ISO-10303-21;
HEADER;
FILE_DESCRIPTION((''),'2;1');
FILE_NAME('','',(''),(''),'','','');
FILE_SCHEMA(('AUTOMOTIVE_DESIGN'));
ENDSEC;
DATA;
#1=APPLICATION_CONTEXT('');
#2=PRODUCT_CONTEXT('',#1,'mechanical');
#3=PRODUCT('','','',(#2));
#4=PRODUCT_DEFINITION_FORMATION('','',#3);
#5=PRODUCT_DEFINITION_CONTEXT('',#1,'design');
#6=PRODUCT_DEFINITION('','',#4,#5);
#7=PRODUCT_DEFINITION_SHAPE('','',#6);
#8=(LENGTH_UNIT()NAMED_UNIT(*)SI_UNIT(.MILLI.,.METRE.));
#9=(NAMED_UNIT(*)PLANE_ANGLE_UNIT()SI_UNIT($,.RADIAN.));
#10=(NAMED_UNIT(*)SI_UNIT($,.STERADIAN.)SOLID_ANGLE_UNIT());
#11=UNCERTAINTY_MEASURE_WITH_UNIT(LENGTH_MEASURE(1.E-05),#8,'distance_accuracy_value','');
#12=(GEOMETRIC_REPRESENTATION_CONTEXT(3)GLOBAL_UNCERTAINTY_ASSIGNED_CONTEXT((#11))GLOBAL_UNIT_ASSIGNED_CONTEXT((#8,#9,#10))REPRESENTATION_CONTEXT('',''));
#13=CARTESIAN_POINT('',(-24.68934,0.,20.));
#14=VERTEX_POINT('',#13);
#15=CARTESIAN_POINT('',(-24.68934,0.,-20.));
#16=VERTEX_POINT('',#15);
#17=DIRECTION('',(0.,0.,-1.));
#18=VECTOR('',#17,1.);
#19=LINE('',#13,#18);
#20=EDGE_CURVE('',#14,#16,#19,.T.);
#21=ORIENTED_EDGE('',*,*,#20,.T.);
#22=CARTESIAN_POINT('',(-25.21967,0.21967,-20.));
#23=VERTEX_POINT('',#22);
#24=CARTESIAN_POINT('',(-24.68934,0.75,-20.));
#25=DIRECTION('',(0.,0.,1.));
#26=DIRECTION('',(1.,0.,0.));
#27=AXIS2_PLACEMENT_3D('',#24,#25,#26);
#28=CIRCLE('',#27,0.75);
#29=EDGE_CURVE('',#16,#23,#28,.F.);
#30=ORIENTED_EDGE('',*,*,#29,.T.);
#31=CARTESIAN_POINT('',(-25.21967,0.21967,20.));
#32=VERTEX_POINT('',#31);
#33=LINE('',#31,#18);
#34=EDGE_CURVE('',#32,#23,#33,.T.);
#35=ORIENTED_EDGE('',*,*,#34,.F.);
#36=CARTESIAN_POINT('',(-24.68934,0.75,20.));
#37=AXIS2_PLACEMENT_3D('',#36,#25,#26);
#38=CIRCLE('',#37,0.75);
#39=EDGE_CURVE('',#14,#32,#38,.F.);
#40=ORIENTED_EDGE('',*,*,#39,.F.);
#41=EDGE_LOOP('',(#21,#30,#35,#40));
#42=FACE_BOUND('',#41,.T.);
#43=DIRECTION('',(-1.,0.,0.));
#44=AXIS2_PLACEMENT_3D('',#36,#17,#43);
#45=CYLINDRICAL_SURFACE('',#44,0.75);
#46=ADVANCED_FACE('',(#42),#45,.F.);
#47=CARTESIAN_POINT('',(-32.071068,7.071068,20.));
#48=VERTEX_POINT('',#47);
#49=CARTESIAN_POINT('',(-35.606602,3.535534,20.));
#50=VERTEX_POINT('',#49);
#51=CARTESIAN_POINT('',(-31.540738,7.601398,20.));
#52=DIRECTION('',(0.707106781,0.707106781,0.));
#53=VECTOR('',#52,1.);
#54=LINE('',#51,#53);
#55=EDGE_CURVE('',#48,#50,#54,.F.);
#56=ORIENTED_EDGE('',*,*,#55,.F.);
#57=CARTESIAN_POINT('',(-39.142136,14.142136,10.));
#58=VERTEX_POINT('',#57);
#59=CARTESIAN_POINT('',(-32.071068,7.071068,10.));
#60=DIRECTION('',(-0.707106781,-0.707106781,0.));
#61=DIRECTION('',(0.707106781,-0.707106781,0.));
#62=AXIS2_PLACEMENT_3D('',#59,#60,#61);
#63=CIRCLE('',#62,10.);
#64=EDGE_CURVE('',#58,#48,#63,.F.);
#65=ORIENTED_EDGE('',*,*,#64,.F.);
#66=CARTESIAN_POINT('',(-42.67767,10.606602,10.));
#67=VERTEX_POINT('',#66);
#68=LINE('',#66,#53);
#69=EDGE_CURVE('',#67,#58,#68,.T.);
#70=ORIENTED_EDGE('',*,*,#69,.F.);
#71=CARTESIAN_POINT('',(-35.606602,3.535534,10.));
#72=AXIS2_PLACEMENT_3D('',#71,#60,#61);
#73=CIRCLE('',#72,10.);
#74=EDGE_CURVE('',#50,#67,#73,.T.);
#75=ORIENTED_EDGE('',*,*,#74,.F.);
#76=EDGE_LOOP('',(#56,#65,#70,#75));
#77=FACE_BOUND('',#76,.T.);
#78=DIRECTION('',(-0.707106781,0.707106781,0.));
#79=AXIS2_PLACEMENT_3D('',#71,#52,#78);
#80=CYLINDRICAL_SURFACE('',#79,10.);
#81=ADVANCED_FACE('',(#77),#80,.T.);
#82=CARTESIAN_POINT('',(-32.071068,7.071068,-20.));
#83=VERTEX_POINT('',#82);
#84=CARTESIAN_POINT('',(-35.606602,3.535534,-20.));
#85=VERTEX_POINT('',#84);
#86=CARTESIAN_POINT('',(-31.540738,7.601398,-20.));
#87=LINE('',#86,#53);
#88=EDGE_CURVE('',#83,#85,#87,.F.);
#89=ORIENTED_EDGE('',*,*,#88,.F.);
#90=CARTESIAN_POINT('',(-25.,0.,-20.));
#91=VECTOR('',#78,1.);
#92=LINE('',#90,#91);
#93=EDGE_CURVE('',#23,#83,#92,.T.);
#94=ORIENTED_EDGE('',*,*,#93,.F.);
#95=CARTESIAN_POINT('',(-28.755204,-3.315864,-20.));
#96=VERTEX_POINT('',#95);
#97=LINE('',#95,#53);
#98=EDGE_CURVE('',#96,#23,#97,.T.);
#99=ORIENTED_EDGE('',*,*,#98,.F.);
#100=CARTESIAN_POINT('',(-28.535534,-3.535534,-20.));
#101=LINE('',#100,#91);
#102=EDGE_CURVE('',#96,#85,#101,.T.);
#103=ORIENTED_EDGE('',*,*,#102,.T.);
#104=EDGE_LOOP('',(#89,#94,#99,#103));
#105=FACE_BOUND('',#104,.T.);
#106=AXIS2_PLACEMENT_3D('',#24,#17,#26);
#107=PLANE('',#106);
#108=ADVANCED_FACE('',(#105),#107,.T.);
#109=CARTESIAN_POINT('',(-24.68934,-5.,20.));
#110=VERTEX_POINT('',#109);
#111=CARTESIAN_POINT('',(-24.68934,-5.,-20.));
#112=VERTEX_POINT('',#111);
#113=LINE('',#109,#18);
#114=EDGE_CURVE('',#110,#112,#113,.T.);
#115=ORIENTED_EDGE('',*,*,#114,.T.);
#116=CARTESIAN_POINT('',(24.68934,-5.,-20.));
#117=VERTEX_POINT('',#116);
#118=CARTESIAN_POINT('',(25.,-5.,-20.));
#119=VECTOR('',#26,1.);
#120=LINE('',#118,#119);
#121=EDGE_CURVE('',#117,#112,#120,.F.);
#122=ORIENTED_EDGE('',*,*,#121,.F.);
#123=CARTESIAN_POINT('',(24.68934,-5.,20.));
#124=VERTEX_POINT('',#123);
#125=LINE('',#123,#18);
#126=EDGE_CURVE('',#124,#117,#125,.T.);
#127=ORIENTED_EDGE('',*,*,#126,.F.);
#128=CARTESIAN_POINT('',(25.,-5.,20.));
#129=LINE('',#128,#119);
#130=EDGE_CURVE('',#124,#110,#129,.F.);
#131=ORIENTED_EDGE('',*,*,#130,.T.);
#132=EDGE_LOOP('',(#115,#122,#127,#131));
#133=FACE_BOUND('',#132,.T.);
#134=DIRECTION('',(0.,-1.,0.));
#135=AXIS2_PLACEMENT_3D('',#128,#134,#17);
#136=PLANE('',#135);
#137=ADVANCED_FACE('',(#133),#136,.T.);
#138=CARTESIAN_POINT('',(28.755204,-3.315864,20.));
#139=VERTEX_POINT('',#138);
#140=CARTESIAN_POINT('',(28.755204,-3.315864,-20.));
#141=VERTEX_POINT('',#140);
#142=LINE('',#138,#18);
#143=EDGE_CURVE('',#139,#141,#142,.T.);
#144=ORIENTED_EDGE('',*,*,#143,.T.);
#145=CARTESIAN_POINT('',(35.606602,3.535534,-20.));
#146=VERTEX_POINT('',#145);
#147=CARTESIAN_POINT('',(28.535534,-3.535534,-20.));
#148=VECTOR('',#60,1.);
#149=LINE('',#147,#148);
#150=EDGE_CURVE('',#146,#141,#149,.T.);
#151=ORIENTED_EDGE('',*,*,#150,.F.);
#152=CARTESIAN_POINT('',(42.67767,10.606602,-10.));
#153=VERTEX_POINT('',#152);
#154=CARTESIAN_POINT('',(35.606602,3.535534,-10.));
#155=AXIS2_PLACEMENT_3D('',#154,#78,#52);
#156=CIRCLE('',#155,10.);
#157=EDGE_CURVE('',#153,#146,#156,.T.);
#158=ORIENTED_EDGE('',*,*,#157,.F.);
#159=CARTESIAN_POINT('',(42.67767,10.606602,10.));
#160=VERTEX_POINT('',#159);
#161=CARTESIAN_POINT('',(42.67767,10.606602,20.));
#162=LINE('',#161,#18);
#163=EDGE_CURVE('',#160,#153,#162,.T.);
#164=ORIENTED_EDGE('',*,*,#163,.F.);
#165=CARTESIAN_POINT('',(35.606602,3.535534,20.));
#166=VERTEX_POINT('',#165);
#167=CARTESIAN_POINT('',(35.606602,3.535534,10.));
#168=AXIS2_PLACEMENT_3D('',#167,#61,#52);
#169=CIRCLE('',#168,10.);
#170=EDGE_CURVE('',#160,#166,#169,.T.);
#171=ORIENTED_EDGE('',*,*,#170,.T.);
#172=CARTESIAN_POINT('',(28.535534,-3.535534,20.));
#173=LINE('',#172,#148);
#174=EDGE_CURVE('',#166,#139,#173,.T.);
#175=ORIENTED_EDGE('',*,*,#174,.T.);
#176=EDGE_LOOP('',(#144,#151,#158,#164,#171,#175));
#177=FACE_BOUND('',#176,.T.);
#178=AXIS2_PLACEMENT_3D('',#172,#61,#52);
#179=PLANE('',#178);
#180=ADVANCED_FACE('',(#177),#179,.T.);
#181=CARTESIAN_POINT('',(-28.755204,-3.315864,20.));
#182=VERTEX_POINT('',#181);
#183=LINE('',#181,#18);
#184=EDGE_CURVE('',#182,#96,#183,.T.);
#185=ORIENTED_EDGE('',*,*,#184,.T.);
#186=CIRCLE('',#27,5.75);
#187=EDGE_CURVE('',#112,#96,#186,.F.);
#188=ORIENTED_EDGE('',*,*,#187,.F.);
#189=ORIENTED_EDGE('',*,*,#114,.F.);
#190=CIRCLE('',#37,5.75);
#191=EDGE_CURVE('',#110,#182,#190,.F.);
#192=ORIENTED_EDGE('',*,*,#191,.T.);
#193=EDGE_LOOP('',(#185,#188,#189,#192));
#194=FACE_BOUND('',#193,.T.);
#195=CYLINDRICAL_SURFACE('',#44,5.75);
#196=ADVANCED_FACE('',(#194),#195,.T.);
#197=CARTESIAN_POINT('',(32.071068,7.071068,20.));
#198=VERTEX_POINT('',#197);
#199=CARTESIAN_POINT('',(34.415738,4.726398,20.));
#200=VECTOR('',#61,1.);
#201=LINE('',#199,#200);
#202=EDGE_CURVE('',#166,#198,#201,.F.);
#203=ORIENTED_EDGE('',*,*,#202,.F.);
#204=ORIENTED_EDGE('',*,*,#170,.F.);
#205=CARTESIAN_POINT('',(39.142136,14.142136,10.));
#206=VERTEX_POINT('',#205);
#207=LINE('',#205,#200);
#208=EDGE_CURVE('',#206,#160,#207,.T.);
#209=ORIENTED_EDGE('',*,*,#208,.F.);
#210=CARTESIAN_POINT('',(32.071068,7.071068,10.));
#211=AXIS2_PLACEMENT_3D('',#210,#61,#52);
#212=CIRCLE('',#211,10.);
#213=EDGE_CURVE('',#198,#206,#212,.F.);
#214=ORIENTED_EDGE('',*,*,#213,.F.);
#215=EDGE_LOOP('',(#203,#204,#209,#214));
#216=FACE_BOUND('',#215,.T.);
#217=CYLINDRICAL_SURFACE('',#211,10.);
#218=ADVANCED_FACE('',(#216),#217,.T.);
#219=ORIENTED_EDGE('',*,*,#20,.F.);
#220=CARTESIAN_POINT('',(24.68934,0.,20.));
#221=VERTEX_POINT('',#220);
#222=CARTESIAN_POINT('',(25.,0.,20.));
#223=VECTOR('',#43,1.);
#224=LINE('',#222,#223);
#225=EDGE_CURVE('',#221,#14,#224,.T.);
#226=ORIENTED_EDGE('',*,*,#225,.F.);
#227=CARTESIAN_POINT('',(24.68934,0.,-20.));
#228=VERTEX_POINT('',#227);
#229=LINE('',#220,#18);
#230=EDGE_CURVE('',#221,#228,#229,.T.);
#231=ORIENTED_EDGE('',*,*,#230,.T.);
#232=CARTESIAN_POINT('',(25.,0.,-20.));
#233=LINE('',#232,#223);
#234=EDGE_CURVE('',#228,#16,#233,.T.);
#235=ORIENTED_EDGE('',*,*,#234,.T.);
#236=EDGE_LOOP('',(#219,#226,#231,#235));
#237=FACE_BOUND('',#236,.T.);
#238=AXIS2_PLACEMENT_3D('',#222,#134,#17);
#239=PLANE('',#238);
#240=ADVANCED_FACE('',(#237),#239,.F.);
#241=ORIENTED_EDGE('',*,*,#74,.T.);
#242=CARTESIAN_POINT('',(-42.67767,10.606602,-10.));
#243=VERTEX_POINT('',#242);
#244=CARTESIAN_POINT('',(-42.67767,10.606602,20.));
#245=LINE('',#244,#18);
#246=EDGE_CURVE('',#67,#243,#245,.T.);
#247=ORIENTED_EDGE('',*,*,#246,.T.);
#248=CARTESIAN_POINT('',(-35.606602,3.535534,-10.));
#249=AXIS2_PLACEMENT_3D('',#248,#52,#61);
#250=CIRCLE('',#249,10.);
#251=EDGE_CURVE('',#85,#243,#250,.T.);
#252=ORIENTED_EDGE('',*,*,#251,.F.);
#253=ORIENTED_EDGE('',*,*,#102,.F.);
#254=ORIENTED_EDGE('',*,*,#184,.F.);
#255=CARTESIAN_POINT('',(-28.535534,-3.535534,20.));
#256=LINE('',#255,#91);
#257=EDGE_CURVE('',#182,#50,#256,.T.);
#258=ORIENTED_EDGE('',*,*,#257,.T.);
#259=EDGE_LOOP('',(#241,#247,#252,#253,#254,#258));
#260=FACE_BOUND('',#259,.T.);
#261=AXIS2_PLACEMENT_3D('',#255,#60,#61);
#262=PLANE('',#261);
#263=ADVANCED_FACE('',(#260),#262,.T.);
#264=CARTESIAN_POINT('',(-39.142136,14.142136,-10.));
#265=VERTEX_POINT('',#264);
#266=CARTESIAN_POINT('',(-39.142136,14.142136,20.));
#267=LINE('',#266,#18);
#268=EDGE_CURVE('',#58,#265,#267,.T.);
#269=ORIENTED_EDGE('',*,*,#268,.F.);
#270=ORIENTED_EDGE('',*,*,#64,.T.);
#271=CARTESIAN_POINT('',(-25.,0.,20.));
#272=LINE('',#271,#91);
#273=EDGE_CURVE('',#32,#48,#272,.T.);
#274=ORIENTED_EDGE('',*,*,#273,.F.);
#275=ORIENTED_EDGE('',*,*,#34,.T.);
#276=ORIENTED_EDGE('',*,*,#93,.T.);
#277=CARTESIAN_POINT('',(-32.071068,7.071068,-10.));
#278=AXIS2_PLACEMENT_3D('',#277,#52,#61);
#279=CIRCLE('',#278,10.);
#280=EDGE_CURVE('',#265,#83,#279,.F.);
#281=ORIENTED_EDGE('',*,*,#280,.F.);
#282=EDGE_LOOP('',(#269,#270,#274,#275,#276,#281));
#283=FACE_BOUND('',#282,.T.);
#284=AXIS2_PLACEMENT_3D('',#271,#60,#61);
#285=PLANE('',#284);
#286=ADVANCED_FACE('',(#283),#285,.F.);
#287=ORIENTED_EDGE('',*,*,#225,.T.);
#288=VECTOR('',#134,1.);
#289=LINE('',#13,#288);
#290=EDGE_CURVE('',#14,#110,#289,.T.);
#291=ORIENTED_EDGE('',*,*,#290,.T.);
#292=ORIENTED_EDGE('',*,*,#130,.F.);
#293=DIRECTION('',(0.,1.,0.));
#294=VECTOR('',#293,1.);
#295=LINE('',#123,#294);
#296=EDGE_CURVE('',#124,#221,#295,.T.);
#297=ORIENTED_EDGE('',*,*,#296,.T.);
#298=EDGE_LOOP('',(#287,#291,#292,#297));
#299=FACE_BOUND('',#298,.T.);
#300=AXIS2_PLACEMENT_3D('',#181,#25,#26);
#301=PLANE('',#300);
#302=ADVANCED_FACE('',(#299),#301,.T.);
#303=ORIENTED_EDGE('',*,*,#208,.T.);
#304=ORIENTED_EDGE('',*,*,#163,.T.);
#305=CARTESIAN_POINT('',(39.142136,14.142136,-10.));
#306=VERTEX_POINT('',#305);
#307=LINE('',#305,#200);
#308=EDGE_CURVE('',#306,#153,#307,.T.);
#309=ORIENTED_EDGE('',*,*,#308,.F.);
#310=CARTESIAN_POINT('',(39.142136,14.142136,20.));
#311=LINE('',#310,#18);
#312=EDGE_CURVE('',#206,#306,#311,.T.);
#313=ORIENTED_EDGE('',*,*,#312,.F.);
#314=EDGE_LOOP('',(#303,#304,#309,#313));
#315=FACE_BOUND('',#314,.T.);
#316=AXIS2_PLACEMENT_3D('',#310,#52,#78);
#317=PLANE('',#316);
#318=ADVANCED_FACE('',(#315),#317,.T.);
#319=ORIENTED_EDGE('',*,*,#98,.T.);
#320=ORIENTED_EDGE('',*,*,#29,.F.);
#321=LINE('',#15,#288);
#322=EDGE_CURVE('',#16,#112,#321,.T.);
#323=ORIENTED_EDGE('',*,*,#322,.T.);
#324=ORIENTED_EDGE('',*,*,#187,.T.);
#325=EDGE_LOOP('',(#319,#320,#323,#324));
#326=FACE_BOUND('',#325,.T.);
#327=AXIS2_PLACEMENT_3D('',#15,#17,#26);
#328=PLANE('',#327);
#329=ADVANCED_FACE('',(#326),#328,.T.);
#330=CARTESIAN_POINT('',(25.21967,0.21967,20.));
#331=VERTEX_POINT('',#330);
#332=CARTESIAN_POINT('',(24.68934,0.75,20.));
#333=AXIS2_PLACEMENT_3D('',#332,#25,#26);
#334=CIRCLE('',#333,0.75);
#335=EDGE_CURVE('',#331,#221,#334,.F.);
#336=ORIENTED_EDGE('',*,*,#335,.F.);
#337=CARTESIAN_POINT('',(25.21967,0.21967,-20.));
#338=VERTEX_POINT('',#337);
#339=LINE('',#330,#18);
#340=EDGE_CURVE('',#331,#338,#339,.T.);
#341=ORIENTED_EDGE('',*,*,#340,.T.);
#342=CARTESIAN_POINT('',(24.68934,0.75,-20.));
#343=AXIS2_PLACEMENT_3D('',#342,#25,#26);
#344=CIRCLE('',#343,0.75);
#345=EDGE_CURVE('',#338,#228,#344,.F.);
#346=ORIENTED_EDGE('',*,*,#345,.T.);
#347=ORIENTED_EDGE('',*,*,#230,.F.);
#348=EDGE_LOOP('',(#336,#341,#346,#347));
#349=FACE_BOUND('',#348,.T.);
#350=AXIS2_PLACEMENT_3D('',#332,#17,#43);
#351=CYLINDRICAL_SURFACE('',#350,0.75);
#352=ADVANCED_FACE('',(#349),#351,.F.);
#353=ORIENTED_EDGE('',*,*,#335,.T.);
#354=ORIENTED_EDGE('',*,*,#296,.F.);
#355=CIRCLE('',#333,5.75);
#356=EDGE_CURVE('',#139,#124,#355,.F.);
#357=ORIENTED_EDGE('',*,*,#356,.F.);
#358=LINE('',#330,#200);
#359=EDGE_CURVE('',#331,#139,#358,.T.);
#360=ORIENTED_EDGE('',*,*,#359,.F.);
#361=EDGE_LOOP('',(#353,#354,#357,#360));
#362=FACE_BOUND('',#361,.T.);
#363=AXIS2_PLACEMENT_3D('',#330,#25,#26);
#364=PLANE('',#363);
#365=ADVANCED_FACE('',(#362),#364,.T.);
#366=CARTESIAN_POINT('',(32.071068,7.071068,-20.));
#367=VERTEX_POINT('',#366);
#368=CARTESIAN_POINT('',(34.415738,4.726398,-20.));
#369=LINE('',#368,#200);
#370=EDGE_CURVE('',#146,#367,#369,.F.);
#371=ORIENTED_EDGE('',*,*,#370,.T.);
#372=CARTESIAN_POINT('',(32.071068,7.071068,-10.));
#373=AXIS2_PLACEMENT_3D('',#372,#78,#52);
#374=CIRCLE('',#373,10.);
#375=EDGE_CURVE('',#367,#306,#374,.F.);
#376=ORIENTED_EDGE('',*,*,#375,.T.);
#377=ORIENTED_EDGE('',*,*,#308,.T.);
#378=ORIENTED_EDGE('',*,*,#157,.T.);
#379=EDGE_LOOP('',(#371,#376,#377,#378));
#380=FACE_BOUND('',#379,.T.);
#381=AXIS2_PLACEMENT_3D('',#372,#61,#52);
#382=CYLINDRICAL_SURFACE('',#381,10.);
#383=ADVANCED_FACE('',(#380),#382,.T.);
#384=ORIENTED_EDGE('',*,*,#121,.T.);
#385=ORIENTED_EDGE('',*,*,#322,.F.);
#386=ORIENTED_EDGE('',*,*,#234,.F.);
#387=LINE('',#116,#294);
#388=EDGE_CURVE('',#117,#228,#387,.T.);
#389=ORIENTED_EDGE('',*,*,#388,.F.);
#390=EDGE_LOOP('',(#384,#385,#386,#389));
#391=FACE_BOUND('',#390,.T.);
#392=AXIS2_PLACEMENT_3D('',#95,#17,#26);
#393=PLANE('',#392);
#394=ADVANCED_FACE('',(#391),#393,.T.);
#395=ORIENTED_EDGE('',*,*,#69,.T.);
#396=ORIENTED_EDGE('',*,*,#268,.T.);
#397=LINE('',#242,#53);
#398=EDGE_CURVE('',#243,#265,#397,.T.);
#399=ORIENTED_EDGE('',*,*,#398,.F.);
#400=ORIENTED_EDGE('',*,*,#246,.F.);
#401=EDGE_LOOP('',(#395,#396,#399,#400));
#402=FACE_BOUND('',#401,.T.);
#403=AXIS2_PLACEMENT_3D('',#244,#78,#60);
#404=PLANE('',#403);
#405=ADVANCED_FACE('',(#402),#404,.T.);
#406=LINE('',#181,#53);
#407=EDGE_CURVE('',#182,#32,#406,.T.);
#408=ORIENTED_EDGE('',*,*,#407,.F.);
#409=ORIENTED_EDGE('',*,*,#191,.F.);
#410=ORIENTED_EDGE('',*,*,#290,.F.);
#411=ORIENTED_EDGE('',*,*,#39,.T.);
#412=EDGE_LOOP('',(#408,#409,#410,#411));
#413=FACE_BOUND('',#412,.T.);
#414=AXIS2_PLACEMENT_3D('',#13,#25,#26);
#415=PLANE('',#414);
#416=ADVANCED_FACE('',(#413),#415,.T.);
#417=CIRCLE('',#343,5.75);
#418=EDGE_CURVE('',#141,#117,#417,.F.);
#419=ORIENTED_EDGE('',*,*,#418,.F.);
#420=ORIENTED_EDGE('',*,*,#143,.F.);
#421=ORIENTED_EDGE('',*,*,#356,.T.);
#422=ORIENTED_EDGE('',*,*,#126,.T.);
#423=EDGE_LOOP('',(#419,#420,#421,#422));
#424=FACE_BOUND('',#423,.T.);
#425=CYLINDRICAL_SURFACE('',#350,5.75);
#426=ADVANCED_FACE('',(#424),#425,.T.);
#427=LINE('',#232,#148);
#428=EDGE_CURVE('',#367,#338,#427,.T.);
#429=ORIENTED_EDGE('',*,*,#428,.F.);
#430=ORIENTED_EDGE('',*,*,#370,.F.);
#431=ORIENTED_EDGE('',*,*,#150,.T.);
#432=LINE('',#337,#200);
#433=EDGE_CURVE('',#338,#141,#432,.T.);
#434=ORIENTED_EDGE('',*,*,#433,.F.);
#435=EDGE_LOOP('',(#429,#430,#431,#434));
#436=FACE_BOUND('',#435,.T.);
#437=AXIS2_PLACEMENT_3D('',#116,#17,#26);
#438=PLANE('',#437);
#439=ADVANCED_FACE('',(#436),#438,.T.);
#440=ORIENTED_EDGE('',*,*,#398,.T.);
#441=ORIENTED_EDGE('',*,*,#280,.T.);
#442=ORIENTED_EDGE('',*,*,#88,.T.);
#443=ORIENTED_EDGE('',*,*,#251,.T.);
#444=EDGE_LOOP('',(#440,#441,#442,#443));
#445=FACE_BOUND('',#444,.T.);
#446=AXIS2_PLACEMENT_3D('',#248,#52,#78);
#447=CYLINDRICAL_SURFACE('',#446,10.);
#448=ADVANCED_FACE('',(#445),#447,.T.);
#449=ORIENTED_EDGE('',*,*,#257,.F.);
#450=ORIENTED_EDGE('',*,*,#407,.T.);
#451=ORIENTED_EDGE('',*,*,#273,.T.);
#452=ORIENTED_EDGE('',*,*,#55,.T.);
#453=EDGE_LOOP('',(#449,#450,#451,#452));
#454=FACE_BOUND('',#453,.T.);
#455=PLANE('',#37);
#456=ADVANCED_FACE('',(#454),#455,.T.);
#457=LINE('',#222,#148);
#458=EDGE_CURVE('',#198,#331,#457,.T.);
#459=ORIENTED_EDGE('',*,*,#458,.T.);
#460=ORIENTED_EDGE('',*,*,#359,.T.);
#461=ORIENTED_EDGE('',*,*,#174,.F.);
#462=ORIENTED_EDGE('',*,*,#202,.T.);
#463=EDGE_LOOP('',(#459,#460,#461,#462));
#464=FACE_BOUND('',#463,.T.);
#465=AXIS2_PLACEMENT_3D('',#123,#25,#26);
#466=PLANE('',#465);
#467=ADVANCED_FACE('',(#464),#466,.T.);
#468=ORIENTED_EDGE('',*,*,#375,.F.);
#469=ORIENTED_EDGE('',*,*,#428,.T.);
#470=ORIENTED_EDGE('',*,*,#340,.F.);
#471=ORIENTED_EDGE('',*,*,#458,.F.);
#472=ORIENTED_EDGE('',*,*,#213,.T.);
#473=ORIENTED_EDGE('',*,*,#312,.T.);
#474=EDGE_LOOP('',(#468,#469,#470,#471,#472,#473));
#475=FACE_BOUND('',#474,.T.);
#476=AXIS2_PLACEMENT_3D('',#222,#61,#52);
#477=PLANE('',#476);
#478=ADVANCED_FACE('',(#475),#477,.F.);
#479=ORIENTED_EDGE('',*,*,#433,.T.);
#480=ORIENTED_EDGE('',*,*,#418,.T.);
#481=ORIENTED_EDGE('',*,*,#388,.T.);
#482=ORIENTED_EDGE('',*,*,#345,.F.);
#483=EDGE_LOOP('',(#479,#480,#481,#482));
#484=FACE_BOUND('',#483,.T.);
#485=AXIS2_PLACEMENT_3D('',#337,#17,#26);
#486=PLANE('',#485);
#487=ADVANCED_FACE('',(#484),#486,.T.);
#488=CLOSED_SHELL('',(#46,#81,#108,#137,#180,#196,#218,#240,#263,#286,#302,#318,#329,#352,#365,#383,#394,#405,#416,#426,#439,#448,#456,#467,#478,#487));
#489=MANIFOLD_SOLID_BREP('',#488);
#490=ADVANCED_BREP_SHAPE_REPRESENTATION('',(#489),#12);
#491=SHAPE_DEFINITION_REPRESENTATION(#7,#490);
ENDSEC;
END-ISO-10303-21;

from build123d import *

# Parameters (mm, degrees)
SM_BASE_FLANGE_1_DEPTH = 20
FILLET_1_R             = 10


# Sheet-metal steps are written as plain solids
with BuildPart() as part:
    # Sketch 1 → Базовая кромка1 (new body)
    with BuildSketch(Plane.XY):
        with BuildLine():
            Line((39.142135624, 14.142135624), (25.219669914, 0.219669914))
            ThreePointArc((25.219669914, 0.219669914), (24.976352402, 0.057090351), (24.689339828, 0))
            Line((24.689339828, 0), (-24.689339828, 0))
            ThreePointArc((-24.689339828, 0), (-24.976352402, 0.057090351), (-25.219669914, 0.219669914))
            Line((-25.219669914, 0.219669914), (-39.142135624, 14.142135624))
            Line((-39.142135624, 14.142135624), (-42.67766953, 10.606601718))
            Line((-42.67766953, 10.606601718), (-28.75520382, -3.315863992))
            ThreePointArc((-28.75520382, -3.315863992), (-26.889769564, -4.562307312), (-24.689339828, -5))
            Line((-24.689339828, -5), (24.689339828, -5))
            ThreePointArc((24.689339828, -5), (26.889769564, -4.562307312), (28.75520382, -3.315863992))
            Line((28.75520382, -3.315863992), (42.67766953, 10.606601718))
            Line((42.67766953, 10.606601718), (39.142135624, 14.142135624))
        make_face()
    extrude(amount=SM_BASE_FLANGE_1_DEPTH)

    # Скругление1
    fillet_1_edges = [part.edges().sort_by_distance(p)[0] for p in [
        (40.909902577, 12.374368671, 20),
        (-40.909902577, 12.374368671, 20),
    ]]
    fillet(fillet_1_edges, radius=FILLET_1_R)

    # Зеркальное отражение1: part across plane


with BuildPart() as part_1:
    add(part.part)
    add(part.part.mirror(Plane(origin=(28.75520382, -3.315863992, 0), x_dir=(1, 0, 0), z_dir=(0, 0, -1))))


solid = part_1.part
